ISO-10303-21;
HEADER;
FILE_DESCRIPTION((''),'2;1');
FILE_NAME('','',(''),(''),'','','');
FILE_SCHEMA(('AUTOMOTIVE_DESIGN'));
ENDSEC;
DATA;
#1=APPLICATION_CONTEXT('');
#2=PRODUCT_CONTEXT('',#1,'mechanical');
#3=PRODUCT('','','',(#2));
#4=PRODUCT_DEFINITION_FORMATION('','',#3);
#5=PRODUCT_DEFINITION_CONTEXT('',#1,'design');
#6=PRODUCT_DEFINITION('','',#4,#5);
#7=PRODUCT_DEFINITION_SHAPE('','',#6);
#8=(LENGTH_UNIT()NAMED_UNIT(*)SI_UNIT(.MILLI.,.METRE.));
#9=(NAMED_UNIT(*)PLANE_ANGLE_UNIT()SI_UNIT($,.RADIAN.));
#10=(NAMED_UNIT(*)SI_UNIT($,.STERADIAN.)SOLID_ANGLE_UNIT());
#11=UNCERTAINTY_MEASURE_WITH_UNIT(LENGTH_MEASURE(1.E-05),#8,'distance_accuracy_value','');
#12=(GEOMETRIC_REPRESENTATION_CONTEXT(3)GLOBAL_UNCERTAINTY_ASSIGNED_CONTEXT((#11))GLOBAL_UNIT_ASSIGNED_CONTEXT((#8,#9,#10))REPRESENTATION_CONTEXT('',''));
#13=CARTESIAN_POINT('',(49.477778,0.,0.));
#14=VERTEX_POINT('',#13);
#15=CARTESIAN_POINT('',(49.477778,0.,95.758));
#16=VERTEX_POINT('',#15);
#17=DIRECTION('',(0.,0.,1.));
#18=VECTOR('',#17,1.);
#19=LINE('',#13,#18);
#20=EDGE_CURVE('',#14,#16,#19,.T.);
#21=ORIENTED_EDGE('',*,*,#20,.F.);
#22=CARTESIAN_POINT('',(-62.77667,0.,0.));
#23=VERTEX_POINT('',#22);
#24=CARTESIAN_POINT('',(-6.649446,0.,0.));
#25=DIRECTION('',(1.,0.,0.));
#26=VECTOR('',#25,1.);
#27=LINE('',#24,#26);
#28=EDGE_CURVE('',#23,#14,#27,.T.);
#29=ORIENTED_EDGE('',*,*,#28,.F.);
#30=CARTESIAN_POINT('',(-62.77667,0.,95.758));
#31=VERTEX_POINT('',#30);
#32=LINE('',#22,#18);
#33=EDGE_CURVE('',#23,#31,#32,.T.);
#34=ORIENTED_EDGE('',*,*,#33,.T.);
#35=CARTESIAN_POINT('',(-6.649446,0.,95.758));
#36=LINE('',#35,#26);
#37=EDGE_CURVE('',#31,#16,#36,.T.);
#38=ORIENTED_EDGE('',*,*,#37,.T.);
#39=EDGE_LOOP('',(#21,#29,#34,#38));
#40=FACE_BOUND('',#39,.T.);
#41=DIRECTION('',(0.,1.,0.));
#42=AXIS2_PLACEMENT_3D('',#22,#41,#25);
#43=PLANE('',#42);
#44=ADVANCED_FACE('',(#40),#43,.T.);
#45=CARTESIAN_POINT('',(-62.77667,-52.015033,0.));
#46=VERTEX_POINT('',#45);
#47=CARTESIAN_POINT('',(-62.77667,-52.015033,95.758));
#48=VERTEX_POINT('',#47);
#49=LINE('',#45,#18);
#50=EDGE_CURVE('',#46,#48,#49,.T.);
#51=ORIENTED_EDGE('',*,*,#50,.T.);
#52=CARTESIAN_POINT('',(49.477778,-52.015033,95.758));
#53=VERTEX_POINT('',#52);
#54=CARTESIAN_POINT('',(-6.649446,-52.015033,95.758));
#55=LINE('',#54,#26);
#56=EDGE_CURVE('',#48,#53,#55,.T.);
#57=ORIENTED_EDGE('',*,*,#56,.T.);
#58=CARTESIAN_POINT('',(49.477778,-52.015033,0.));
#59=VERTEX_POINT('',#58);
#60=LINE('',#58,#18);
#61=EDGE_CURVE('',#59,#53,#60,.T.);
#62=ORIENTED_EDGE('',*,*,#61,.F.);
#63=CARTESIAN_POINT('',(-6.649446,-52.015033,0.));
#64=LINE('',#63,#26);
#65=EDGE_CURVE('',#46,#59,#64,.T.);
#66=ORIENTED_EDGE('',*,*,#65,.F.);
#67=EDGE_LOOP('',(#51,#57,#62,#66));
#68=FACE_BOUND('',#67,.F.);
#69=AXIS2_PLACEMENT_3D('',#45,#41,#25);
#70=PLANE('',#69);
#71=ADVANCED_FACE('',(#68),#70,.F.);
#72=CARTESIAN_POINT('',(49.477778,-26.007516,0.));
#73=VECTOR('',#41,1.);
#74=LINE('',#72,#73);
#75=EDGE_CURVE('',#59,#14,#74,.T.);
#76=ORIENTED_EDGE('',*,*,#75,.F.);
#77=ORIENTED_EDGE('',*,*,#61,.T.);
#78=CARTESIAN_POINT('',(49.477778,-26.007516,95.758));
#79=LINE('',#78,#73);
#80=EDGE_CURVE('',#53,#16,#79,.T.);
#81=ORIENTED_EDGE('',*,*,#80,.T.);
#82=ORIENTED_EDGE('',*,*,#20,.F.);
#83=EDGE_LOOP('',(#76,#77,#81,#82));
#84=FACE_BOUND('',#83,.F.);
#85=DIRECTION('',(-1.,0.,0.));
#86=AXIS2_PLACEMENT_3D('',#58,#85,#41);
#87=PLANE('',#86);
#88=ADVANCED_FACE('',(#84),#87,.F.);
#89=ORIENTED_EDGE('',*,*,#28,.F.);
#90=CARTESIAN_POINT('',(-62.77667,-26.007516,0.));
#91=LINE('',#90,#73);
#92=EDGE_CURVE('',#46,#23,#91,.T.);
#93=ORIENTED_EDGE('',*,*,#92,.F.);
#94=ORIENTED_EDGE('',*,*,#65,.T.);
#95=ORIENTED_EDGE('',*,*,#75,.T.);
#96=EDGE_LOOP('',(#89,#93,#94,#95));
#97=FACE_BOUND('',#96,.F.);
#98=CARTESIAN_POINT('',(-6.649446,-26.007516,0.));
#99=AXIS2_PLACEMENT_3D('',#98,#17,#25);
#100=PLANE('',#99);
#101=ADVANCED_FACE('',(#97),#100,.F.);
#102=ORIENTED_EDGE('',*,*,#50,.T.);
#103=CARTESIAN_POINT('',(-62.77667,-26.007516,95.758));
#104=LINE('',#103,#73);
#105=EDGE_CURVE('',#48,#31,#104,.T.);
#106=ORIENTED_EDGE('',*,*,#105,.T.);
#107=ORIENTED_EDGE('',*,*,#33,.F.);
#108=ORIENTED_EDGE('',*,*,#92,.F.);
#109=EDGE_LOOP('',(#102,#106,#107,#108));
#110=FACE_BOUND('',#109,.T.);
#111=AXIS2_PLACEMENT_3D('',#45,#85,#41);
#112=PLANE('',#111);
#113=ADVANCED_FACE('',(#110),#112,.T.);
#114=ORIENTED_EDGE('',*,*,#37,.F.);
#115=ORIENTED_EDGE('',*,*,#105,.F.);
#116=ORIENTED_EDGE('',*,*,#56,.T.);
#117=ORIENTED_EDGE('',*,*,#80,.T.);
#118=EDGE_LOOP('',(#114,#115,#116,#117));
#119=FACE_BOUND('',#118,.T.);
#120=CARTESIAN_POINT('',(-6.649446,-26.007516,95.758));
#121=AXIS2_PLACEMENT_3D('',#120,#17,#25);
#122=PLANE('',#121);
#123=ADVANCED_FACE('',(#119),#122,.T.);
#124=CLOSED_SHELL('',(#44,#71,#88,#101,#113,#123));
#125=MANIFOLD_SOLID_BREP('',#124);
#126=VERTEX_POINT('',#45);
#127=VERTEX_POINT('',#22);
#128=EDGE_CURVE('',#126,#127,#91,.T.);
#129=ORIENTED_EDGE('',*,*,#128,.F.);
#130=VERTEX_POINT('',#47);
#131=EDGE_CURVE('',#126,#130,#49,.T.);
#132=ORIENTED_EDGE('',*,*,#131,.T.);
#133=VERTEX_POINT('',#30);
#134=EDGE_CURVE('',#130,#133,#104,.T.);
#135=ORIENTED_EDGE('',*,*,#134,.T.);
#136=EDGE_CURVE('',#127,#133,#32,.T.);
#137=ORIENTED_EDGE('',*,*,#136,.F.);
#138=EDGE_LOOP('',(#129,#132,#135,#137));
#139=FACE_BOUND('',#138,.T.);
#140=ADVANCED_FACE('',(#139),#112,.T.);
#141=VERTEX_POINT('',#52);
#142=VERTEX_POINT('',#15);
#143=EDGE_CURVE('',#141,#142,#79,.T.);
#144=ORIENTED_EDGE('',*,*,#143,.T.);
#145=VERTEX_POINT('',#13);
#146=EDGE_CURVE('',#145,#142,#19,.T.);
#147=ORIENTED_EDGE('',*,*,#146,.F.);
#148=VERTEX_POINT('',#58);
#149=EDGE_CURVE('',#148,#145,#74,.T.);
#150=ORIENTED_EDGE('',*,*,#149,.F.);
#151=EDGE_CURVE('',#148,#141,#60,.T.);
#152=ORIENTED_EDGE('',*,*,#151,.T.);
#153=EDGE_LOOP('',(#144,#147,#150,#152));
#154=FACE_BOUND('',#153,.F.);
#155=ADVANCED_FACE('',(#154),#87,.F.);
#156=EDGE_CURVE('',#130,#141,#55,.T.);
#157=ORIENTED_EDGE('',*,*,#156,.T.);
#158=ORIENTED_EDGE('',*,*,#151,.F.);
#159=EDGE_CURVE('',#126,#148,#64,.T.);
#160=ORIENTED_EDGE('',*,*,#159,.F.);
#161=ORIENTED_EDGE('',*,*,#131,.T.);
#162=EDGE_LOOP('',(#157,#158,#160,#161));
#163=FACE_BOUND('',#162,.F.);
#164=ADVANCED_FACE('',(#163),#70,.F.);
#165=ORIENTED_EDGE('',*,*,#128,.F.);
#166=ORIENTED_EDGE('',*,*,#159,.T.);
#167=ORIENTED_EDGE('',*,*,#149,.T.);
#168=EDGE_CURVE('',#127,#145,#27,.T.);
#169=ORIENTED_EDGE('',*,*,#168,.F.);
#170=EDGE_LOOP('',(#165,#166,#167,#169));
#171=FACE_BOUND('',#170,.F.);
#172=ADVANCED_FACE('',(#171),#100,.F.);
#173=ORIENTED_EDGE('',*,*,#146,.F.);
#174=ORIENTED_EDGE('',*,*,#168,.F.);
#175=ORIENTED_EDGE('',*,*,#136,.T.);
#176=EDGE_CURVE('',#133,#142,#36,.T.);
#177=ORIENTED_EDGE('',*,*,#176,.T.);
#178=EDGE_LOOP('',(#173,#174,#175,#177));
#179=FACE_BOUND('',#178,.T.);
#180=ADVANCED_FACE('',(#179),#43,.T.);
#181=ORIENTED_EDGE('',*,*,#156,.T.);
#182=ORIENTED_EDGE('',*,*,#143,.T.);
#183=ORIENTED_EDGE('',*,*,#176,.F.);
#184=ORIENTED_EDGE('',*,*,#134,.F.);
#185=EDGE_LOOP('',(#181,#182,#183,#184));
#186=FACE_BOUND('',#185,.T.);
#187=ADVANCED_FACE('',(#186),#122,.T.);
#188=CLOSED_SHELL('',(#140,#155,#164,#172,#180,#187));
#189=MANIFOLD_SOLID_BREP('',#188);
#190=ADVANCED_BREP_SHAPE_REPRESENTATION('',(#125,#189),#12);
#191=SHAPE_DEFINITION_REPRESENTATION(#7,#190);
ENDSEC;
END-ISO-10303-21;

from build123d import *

# Parameters (mm, degrees)
F1_W     = 112.254448235
F1_H     = 52.0150326192
F2_DEPTH = 95.758
F0_W     = 112.254448235
F0_H     = 52.0150326192


with BuildPart() as f2:
    # F1 (on face) → F2 (new body)
    with BuildSketch(Plane.XY):
        with Locations((-6.6494457424, -26.0075163096)):
            Rectangle(F1_W, F1_H)
    extrude(amount=F2_DEPTH)


with BuildPart() as f2b:
    # F0 (on Top) → F2, piece 2 (new body)
    with BuildSketch(Plane.XY):
        with Locations((-6.6494457424, -26.0075163096)):
            Rectangle(F0_W, F0_H)
    extrude(amount=F2_DEPTH)


solid = Compound([f2.part, f2b.part])
